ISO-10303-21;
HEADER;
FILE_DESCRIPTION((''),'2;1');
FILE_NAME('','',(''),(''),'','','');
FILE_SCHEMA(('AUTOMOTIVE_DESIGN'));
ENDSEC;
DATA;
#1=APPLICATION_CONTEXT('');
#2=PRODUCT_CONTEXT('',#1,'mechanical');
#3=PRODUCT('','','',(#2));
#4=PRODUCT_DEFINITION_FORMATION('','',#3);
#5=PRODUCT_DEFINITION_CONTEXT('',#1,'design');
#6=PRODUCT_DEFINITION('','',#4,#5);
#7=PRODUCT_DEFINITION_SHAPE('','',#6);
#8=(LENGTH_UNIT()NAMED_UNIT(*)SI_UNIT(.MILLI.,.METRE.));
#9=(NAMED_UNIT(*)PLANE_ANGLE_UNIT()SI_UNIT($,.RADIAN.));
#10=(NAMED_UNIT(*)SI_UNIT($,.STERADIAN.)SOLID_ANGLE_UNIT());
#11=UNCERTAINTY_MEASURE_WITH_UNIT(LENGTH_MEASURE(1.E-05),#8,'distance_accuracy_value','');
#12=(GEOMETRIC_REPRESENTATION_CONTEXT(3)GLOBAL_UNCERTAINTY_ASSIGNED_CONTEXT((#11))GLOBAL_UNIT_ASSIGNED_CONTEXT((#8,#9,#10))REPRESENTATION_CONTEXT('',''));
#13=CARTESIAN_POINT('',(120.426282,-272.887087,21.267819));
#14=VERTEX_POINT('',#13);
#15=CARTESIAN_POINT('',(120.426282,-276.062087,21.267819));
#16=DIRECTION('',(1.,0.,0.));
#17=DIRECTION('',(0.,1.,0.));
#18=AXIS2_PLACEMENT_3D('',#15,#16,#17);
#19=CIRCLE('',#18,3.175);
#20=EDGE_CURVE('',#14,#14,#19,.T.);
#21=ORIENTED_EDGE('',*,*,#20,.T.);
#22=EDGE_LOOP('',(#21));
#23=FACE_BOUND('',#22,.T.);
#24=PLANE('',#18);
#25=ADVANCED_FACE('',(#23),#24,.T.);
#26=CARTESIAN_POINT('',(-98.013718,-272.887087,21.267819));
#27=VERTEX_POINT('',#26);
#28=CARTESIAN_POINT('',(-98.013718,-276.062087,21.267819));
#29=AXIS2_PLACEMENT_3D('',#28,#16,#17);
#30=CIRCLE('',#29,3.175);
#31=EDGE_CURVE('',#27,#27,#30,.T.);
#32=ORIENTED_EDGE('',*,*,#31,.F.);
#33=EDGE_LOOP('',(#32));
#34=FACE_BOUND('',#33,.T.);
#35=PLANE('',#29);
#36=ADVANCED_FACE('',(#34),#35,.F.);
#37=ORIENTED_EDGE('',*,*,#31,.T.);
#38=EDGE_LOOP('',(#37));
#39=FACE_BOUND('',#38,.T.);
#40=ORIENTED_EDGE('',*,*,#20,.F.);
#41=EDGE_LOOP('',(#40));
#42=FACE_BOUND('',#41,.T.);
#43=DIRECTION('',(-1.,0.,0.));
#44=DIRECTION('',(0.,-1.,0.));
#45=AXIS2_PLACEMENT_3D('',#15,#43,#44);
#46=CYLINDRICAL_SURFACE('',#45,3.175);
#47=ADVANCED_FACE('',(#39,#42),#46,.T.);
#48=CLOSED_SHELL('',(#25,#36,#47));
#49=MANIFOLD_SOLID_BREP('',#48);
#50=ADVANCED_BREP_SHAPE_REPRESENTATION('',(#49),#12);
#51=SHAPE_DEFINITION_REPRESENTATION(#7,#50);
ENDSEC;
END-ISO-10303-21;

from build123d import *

# Parameters (mm, degrees)
BOSS_EXTRUDE1_OUTLINE_R = 3.175
BOSS_EXTRUDE1_DEPTH     = 218.44


# Read off the part's stored shape, not the designer's step: Boss-Extrude1
with BuildPart() as part:
    # Boss-Extrude1 outline → Boss-Extrude1 (new body)
    with BuildSketch(Plane(origin=(-98.013718438, 0, 0), x_dir=(0, 0, -1), z_dir=(1, 0, 0))):
        with Locations((-21.267819308, -276.062087489)):
            Circle(BOSS_EXTRUDE1_OUTLINE_R)
    extrude(amount=BOSS_EXTRUDE1_DEPTH)


solid = part.part
